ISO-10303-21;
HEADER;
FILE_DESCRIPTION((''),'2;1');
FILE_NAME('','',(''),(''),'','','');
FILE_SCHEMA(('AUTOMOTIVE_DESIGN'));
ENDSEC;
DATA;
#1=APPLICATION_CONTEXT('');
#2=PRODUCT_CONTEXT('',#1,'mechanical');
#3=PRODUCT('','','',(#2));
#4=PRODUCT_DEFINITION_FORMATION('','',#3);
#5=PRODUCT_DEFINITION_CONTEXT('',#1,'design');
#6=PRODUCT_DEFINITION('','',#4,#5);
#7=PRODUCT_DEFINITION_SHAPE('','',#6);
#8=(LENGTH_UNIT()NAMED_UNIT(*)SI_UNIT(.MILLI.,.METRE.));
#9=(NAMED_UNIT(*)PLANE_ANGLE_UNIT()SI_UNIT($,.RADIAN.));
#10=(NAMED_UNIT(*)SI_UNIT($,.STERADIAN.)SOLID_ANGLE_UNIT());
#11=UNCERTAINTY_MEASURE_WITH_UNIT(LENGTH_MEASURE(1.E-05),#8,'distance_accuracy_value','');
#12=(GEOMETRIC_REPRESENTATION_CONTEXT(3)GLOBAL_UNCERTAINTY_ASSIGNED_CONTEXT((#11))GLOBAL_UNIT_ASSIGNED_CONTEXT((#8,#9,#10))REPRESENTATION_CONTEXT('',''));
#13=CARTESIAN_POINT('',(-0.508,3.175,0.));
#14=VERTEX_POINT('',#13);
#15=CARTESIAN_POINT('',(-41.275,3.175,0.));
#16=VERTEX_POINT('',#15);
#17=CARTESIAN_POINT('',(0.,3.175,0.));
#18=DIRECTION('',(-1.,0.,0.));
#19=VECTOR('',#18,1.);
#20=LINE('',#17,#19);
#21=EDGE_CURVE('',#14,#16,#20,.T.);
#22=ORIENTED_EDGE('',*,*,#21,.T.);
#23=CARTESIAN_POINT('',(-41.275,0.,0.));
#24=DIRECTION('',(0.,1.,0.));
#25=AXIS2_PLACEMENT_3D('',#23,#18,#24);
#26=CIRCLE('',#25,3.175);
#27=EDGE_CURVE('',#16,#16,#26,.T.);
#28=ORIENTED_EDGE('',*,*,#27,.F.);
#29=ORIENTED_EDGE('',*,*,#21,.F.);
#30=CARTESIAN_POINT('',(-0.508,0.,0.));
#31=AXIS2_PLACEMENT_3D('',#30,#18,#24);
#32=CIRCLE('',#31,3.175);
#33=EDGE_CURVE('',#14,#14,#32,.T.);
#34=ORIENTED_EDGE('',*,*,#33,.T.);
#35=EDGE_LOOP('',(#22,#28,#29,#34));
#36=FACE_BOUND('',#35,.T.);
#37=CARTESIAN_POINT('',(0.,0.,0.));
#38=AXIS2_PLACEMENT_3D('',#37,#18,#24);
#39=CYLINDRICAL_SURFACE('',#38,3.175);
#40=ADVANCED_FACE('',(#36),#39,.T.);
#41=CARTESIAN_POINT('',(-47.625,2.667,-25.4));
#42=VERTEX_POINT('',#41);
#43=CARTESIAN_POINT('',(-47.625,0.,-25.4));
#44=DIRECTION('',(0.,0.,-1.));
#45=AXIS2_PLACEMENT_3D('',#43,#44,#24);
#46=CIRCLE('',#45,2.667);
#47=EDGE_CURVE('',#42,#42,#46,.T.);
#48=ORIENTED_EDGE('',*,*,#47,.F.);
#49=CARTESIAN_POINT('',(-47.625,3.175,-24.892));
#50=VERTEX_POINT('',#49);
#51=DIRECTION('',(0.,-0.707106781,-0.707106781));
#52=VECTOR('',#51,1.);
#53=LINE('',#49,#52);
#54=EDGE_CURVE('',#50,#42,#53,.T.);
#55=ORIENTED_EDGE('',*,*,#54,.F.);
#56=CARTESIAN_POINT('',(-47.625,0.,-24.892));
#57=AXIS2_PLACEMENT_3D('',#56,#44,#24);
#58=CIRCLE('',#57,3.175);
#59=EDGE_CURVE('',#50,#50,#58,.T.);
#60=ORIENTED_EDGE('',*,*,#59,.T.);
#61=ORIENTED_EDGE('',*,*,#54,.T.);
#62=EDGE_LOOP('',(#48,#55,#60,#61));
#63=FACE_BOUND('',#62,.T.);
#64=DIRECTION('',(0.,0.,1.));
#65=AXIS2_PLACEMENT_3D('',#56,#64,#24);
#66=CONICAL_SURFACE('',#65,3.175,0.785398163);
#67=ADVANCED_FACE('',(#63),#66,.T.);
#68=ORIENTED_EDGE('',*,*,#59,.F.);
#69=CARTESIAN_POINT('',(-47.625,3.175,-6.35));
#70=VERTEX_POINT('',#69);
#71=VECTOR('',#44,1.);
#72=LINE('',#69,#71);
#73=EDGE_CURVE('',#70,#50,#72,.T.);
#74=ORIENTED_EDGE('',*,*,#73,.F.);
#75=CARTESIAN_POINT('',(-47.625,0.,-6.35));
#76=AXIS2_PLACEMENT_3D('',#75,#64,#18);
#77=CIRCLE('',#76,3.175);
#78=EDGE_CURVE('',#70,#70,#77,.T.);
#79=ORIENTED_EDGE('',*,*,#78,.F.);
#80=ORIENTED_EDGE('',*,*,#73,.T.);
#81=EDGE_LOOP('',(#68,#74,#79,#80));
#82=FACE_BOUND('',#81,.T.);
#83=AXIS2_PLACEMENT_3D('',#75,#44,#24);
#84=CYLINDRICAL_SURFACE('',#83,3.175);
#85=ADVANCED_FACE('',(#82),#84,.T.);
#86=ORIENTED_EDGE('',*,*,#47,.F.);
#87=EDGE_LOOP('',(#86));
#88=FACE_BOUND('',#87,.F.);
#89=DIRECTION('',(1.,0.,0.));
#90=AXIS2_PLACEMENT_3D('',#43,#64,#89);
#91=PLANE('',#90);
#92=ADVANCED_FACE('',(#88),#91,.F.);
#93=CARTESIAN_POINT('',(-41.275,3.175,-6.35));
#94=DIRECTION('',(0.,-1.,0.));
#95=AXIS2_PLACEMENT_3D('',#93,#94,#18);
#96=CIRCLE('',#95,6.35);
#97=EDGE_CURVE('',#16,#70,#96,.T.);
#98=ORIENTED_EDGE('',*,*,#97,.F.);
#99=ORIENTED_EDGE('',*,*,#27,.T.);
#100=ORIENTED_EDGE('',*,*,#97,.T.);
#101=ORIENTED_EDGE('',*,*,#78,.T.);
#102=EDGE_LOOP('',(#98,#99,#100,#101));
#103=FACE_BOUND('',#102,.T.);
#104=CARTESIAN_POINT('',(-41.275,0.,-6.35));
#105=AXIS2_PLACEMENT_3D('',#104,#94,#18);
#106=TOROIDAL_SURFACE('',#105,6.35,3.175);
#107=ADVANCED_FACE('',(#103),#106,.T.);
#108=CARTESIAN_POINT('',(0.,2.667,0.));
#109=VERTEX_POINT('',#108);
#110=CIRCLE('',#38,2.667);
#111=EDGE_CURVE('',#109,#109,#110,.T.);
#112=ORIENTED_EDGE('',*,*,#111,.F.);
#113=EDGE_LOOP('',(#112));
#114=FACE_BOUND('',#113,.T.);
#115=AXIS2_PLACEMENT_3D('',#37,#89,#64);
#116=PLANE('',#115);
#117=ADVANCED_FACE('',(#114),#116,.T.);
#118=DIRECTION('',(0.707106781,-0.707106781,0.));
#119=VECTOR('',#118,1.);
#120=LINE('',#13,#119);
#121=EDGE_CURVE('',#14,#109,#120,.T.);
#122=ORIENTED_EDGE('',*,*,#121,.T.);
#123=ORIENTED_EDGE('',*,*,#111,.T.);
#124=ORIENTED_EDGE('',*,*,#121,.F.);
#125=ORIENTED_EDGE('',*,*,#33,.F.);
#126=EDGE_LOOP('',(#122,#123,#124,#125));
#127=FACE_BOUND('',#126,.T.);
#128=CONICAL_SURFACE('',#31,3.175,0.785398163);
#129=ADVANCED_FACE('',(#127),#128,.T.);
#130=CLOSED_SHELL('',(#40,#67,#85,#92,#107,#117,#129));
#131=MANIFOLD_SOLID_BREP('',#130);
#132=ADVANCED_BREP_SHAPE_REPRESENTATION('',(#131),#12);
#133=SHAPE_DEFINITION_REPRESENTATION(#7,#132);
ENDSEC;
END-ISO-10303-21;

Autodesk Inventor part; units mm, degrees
ref_plane "YZ Plane" through (0, 0, 0) normal (1, 0, 0) x (0, 1, 0)
ref_plane "XZ Plane" through (0, 0, 0) normal (0, 1, 0) x (-1, 0, 0)
ref_plane "XY Plane" through (0, 0, 0) normal (0, 0, 1) x (1, 0, 0)
sketch "Sketch1" plane through (0, 0, 0) normal (0, 1, 0) x (-1, 0, 0)
  line L0 (0, 0) -> (41.275, 0)
  line L1 (47.625, -6.35) -> (47.625, -25.4)
  arc A0 (47.625, -6.35) -> (41.275, 0) centre (41.275, -6.35) ccw
  point P0 (47.625, 0)
  dimension "d0" = 47.625
  dimension "d1" = 25.4
  dimension "d3" = 6.35
sketch "Sketch2" plane through (0, 0, 0) normal (1, 0, 0) x (0, 1, 0)
  circle A0 centre (0, 0) radius 3.175
  dimension "d2" = 6.35
sweep "Sweep1" add profiles "Sketch2" path "Sketch1"
chamfer "Chamfer1" distance 0.508 angle 45 1 edges at (0, -3.175, 0)
thread "Thread1"
chamfer "Chamfer2" distance 0.508 angle 45 1 edges at (-47.625, -3.175, -25.4)
properties part number "fc17-015_AnchorBolt" material "Steel"
